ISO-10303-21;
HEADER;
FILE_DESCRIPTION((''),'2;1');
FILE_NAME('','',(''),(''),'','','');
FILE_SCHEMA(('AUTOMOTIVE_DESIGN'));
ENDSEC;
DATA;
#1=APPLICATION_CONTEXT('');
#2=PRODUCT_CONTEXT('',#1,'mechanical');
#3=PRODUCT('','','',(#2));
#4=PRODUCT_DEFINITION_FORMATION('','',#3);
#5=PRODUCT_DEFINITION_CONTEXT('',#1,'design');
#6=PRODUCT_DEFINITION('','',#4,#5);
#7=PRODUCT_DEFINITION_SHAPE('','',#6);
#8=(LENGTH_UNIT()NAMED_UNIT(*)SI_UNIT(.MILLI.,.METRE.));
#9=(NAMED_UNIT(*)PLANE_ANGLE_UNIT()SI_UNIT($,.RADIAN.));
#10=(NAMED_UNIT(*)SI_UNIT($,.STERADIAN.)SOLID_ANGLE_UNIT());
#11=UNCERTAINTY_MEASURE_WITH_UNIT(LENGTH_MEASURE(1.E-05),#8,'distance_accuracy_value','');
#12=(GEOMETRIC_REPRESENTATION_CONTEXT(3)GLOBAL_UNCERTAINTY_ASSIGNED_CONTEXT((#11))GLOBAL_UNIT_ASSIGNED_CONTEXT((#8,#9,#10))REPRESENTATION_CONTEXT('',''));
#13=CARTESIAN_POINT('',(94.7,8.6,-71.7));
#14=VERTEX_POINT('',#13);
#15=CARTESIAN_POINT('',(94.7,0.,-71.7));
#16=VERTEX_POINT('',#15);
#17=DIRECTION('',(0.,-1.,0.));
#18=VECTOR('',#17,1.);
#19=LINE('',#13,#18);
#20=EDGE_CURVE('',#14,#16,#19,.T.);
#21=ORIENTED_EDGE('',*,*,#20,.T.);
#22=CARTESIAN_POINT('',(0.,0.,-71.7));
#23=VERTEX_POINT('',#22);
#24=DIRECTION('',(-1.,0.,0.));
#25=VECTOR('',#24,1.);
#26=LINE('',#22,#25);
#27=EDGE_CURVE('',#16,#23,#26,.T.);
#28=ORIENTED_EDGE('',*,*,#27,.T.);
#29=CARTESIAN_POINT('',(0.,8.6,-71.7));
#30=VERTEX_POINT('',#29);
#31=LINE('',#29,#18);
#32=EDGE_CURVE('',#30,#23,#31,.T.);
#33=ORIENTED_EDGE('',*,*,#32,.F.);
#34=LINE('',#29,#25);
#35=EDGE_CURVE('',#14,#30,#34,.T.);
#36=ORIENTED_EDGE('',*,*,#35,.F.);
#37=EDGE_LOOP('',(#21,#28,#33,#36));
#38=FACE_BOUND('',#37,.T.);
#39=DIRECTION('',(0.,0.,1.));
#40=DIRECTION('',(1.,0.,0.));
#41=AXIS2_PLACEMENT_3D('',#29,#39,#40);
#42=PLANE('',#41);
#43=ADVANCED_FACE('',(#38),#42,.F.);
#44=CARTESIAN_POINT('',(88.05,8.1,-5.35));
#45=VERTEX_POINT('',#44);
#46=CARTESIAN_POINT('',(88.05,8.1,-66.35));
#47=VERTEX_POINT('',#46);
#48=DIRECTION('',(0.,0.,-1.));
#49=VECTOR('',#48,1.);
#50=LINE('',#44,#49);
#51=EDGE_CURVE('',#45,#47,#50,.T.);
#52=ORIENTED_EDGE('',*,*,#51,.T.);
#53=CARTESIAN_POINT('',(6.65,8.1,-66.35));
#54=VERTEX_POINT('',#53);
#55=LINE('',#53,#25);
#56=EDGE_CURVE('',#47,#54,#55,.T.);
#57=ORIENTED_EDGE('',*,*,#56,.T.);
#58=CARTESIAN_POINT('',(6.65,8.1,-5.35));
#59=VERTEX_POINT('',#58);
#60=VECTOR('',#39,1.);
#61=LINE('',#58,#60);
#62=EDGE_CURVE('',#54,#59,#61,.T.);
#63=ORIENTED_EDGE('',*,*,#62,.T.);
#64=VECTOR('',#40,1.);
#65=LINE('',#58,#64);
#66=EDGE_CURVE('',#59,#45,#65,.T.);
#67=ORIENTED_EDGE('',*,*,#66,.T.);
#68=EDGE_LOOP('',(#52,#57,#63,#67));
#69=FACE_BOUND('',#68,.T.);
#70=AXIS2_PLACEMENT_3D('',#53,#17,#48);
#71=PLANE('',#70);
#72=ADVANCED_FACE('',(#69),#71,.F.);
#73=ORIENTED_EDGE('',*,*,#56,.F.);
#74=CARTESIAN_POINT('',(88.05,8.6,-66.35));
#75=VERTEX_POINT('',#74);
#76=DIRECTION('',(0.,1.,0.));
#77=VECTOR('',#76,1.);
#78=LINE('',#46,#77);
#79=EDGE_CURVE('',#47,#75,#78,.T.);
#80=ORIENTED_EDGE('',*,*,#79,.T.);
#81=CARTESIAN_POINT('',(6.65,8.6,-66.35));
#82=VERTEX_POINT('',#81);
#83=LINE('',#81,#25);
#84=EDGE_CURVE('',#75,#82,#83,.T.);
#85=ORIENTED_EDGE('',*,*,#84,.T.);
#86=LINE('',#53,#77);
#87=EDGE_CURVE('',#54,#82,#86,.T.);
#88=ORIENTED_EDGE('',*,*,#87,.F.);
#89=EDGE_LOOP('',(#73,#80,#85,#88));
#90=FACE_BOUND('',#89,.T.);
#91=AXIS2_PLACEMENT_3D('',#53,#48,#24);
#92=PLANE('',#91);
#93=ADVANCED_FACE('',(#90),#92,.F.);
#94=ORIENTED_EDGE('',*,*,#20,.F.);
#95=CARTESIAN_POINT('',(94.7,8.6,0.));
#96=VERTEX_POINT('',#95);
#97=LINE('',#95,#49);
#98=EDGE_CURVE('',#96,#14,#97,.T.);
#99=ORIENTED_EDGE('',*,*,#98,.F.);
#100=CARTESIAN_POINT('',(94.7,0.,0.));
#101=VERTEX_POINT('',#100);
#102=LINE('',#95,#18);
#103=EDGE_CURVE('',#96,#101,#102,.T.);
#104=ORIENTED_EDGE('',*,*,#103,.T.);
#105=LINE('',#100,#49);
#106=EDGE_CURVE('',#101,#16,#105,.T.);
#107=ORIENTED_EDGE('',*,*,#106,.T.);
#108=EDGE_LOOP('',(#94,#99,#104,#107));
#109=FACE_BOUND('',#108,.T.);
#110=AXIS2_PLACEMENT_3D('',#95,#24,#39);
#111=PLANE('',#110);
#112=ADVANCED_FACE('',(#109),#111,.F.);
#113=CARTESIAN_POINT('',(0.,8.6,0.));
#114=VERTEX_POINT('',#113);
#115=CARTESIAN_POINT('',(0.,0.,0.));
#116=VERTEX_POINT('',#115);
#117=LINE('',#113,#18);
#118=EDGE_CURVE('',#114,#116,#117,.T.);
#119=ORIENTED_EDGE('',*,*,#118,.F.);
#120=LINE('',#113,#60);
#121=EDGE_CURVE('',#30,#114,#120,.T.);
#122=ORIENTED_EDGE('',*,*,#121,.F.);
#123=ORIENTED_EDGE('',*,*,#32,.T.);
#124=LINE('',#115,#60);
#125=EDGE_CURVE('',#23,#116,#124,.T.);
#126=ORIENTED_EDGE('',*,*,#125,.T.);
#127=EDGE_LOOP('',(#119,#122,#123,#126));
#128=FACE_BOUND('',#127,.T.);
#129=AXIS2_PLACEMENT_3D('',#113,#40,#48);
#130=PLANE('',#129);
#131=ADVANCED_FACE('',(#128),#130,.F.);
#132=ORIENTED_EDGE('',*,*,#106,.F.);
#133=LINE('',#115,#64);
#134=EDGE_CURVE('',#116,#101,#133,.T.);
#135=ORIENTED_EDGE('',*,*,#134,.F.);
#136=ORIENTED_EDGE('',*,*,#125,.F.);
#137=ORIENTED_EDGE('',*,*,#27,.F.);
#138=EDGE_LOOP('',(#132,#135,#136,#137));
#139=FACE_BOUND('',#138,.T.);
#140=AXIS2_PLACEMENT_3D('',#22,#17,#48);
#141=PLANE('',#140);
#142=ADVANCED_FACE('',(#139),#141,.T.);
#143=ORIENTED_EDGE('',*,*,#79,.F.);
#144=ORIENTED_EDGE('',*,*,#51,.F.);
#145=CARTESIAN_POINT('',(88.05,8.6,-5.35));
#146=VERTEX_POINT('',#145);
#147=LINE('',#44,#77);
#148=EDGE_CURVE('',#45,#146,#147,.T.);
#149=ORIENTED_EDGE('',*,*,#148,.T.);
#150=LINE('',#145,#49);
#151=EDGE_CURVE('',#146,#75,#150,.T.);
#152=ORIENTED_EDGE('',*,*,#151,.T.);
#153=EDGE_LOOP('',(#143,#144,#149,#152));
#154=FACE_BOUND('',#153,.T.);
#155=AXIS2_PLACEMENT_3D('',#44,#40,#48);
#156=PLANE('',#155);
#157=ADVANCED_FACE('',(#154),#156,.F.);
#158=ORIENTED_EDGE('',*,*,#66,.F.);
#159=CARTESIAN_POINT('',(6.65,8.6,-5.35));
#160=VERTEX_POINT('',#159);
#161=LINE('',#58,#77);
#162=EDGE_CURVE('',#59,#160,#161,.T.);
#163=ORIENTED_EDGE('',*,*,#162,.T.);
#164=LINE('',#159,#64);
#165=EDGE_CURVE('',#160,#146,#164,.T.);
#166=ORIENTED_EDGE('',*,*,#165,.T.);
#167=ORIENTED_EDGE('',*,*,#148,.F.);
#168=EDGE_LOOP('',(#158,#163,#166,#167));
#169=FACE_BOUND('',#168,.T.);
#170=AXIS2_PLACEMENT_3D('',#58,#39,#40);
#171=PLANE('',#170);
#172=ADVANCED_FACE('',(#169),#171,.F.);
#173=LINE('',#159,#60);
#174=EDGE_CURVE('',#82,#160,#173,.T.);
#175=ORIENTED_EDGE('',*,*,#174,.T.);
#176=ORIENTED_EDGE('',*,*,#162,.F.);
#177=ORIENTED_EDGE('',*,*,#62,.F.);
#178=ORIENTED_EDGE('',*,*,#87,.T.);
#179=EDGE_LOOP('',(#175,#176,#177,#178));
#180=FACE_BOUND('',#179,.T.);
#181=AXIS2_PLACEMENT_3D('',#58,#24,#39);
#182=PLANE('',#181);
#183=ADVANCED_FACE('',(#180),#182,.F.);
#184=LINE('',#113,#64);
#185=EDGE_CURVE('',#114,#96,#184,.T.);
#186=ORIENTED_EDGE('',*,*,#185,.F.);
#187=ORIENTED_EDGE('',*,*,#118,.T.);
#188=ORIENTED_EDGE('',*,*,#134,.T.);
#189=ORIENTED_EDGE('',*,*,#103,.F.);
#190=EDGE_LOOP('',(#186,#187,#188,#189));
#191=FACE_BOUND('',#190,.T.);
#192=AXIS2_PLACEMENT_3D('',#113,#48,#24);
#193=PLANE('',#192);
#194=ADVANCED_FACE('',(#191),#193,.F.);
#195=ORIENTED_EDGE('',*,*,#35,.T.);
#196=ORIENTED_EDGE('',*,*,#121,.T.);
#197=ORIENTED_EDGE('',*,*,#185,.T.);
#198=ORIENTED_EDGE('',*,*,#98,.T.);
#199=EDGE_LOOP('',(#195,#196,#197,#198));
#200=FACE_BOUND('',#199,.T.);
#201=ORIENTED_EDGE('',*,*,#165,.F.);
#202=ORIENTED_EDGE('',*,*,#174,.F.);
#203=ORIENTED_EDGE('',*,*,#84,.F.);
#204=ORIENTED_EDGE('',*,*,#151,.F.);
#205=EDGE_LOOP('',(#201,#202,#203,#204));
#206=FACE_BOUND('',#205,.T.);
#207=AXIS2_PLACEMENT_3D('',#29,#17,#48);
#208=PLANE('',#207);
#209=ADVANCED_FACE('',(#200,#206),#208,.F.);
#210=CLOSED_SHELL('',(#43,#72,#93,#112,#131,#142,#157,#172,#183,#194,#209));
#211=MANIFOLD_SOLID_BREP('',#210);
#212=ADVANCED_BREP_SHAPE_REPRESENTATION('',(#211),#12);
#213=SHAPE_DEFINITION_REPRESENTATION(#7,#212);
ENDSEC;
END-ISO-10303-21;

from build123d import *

# Parameters (mm, degrees)
SKETCH1_W               = 94.7
SKETCH1_H               = 71.7
BOSS_EXTRUDE1_DEPTH     = 8.6
BOSS_EXTRUDE2_START     = -0.5
BOSS_EXTRUDE2_OUTLINE_W = 81.4
BOSS_EXTRUDE2_OUTLINE_H = 61
BOSS_EXTRUDE2_DEPTH     = 0.5


# Read off the part's stored shape, not the designer's step: Boss-Extrude2
with BuildPart() as part:
    # Sketch1 → Boss-Extrude1 (new body)
    with BuildSketch(Plane(origin=(0, 0, 0), x_dir=(1, 0, 0), z_dir=(0, 1, 0))):
        with Locations((47.35, 35.85)):
            Rectangle(SKETCH1_W, SKETCH1_H)
    extrude(amount=BOSS_EXTRUDE1_DEPTH)

    # Boss-Extrude2 outline → Boss-Extrude2 (cut)
    with BuildSketch(Plane(origin=(0, 8.6, 0), x_dir=(-1, 0, 0), z_dir=(0, 1, 0)).offset(BOSS_EXTRUDE2_START)):
        with Locations((-47.35, -35.85)):
            Rectangle(BOSS_EXTRUDE2_OUTLINE_W, BOSS_EXTRUDE2_OUTLINE_H)
    extrude(amount=BOSS_EXTRUDE2_DEPTH, mode=Mode.SUBTRACT)


solid = part.part
